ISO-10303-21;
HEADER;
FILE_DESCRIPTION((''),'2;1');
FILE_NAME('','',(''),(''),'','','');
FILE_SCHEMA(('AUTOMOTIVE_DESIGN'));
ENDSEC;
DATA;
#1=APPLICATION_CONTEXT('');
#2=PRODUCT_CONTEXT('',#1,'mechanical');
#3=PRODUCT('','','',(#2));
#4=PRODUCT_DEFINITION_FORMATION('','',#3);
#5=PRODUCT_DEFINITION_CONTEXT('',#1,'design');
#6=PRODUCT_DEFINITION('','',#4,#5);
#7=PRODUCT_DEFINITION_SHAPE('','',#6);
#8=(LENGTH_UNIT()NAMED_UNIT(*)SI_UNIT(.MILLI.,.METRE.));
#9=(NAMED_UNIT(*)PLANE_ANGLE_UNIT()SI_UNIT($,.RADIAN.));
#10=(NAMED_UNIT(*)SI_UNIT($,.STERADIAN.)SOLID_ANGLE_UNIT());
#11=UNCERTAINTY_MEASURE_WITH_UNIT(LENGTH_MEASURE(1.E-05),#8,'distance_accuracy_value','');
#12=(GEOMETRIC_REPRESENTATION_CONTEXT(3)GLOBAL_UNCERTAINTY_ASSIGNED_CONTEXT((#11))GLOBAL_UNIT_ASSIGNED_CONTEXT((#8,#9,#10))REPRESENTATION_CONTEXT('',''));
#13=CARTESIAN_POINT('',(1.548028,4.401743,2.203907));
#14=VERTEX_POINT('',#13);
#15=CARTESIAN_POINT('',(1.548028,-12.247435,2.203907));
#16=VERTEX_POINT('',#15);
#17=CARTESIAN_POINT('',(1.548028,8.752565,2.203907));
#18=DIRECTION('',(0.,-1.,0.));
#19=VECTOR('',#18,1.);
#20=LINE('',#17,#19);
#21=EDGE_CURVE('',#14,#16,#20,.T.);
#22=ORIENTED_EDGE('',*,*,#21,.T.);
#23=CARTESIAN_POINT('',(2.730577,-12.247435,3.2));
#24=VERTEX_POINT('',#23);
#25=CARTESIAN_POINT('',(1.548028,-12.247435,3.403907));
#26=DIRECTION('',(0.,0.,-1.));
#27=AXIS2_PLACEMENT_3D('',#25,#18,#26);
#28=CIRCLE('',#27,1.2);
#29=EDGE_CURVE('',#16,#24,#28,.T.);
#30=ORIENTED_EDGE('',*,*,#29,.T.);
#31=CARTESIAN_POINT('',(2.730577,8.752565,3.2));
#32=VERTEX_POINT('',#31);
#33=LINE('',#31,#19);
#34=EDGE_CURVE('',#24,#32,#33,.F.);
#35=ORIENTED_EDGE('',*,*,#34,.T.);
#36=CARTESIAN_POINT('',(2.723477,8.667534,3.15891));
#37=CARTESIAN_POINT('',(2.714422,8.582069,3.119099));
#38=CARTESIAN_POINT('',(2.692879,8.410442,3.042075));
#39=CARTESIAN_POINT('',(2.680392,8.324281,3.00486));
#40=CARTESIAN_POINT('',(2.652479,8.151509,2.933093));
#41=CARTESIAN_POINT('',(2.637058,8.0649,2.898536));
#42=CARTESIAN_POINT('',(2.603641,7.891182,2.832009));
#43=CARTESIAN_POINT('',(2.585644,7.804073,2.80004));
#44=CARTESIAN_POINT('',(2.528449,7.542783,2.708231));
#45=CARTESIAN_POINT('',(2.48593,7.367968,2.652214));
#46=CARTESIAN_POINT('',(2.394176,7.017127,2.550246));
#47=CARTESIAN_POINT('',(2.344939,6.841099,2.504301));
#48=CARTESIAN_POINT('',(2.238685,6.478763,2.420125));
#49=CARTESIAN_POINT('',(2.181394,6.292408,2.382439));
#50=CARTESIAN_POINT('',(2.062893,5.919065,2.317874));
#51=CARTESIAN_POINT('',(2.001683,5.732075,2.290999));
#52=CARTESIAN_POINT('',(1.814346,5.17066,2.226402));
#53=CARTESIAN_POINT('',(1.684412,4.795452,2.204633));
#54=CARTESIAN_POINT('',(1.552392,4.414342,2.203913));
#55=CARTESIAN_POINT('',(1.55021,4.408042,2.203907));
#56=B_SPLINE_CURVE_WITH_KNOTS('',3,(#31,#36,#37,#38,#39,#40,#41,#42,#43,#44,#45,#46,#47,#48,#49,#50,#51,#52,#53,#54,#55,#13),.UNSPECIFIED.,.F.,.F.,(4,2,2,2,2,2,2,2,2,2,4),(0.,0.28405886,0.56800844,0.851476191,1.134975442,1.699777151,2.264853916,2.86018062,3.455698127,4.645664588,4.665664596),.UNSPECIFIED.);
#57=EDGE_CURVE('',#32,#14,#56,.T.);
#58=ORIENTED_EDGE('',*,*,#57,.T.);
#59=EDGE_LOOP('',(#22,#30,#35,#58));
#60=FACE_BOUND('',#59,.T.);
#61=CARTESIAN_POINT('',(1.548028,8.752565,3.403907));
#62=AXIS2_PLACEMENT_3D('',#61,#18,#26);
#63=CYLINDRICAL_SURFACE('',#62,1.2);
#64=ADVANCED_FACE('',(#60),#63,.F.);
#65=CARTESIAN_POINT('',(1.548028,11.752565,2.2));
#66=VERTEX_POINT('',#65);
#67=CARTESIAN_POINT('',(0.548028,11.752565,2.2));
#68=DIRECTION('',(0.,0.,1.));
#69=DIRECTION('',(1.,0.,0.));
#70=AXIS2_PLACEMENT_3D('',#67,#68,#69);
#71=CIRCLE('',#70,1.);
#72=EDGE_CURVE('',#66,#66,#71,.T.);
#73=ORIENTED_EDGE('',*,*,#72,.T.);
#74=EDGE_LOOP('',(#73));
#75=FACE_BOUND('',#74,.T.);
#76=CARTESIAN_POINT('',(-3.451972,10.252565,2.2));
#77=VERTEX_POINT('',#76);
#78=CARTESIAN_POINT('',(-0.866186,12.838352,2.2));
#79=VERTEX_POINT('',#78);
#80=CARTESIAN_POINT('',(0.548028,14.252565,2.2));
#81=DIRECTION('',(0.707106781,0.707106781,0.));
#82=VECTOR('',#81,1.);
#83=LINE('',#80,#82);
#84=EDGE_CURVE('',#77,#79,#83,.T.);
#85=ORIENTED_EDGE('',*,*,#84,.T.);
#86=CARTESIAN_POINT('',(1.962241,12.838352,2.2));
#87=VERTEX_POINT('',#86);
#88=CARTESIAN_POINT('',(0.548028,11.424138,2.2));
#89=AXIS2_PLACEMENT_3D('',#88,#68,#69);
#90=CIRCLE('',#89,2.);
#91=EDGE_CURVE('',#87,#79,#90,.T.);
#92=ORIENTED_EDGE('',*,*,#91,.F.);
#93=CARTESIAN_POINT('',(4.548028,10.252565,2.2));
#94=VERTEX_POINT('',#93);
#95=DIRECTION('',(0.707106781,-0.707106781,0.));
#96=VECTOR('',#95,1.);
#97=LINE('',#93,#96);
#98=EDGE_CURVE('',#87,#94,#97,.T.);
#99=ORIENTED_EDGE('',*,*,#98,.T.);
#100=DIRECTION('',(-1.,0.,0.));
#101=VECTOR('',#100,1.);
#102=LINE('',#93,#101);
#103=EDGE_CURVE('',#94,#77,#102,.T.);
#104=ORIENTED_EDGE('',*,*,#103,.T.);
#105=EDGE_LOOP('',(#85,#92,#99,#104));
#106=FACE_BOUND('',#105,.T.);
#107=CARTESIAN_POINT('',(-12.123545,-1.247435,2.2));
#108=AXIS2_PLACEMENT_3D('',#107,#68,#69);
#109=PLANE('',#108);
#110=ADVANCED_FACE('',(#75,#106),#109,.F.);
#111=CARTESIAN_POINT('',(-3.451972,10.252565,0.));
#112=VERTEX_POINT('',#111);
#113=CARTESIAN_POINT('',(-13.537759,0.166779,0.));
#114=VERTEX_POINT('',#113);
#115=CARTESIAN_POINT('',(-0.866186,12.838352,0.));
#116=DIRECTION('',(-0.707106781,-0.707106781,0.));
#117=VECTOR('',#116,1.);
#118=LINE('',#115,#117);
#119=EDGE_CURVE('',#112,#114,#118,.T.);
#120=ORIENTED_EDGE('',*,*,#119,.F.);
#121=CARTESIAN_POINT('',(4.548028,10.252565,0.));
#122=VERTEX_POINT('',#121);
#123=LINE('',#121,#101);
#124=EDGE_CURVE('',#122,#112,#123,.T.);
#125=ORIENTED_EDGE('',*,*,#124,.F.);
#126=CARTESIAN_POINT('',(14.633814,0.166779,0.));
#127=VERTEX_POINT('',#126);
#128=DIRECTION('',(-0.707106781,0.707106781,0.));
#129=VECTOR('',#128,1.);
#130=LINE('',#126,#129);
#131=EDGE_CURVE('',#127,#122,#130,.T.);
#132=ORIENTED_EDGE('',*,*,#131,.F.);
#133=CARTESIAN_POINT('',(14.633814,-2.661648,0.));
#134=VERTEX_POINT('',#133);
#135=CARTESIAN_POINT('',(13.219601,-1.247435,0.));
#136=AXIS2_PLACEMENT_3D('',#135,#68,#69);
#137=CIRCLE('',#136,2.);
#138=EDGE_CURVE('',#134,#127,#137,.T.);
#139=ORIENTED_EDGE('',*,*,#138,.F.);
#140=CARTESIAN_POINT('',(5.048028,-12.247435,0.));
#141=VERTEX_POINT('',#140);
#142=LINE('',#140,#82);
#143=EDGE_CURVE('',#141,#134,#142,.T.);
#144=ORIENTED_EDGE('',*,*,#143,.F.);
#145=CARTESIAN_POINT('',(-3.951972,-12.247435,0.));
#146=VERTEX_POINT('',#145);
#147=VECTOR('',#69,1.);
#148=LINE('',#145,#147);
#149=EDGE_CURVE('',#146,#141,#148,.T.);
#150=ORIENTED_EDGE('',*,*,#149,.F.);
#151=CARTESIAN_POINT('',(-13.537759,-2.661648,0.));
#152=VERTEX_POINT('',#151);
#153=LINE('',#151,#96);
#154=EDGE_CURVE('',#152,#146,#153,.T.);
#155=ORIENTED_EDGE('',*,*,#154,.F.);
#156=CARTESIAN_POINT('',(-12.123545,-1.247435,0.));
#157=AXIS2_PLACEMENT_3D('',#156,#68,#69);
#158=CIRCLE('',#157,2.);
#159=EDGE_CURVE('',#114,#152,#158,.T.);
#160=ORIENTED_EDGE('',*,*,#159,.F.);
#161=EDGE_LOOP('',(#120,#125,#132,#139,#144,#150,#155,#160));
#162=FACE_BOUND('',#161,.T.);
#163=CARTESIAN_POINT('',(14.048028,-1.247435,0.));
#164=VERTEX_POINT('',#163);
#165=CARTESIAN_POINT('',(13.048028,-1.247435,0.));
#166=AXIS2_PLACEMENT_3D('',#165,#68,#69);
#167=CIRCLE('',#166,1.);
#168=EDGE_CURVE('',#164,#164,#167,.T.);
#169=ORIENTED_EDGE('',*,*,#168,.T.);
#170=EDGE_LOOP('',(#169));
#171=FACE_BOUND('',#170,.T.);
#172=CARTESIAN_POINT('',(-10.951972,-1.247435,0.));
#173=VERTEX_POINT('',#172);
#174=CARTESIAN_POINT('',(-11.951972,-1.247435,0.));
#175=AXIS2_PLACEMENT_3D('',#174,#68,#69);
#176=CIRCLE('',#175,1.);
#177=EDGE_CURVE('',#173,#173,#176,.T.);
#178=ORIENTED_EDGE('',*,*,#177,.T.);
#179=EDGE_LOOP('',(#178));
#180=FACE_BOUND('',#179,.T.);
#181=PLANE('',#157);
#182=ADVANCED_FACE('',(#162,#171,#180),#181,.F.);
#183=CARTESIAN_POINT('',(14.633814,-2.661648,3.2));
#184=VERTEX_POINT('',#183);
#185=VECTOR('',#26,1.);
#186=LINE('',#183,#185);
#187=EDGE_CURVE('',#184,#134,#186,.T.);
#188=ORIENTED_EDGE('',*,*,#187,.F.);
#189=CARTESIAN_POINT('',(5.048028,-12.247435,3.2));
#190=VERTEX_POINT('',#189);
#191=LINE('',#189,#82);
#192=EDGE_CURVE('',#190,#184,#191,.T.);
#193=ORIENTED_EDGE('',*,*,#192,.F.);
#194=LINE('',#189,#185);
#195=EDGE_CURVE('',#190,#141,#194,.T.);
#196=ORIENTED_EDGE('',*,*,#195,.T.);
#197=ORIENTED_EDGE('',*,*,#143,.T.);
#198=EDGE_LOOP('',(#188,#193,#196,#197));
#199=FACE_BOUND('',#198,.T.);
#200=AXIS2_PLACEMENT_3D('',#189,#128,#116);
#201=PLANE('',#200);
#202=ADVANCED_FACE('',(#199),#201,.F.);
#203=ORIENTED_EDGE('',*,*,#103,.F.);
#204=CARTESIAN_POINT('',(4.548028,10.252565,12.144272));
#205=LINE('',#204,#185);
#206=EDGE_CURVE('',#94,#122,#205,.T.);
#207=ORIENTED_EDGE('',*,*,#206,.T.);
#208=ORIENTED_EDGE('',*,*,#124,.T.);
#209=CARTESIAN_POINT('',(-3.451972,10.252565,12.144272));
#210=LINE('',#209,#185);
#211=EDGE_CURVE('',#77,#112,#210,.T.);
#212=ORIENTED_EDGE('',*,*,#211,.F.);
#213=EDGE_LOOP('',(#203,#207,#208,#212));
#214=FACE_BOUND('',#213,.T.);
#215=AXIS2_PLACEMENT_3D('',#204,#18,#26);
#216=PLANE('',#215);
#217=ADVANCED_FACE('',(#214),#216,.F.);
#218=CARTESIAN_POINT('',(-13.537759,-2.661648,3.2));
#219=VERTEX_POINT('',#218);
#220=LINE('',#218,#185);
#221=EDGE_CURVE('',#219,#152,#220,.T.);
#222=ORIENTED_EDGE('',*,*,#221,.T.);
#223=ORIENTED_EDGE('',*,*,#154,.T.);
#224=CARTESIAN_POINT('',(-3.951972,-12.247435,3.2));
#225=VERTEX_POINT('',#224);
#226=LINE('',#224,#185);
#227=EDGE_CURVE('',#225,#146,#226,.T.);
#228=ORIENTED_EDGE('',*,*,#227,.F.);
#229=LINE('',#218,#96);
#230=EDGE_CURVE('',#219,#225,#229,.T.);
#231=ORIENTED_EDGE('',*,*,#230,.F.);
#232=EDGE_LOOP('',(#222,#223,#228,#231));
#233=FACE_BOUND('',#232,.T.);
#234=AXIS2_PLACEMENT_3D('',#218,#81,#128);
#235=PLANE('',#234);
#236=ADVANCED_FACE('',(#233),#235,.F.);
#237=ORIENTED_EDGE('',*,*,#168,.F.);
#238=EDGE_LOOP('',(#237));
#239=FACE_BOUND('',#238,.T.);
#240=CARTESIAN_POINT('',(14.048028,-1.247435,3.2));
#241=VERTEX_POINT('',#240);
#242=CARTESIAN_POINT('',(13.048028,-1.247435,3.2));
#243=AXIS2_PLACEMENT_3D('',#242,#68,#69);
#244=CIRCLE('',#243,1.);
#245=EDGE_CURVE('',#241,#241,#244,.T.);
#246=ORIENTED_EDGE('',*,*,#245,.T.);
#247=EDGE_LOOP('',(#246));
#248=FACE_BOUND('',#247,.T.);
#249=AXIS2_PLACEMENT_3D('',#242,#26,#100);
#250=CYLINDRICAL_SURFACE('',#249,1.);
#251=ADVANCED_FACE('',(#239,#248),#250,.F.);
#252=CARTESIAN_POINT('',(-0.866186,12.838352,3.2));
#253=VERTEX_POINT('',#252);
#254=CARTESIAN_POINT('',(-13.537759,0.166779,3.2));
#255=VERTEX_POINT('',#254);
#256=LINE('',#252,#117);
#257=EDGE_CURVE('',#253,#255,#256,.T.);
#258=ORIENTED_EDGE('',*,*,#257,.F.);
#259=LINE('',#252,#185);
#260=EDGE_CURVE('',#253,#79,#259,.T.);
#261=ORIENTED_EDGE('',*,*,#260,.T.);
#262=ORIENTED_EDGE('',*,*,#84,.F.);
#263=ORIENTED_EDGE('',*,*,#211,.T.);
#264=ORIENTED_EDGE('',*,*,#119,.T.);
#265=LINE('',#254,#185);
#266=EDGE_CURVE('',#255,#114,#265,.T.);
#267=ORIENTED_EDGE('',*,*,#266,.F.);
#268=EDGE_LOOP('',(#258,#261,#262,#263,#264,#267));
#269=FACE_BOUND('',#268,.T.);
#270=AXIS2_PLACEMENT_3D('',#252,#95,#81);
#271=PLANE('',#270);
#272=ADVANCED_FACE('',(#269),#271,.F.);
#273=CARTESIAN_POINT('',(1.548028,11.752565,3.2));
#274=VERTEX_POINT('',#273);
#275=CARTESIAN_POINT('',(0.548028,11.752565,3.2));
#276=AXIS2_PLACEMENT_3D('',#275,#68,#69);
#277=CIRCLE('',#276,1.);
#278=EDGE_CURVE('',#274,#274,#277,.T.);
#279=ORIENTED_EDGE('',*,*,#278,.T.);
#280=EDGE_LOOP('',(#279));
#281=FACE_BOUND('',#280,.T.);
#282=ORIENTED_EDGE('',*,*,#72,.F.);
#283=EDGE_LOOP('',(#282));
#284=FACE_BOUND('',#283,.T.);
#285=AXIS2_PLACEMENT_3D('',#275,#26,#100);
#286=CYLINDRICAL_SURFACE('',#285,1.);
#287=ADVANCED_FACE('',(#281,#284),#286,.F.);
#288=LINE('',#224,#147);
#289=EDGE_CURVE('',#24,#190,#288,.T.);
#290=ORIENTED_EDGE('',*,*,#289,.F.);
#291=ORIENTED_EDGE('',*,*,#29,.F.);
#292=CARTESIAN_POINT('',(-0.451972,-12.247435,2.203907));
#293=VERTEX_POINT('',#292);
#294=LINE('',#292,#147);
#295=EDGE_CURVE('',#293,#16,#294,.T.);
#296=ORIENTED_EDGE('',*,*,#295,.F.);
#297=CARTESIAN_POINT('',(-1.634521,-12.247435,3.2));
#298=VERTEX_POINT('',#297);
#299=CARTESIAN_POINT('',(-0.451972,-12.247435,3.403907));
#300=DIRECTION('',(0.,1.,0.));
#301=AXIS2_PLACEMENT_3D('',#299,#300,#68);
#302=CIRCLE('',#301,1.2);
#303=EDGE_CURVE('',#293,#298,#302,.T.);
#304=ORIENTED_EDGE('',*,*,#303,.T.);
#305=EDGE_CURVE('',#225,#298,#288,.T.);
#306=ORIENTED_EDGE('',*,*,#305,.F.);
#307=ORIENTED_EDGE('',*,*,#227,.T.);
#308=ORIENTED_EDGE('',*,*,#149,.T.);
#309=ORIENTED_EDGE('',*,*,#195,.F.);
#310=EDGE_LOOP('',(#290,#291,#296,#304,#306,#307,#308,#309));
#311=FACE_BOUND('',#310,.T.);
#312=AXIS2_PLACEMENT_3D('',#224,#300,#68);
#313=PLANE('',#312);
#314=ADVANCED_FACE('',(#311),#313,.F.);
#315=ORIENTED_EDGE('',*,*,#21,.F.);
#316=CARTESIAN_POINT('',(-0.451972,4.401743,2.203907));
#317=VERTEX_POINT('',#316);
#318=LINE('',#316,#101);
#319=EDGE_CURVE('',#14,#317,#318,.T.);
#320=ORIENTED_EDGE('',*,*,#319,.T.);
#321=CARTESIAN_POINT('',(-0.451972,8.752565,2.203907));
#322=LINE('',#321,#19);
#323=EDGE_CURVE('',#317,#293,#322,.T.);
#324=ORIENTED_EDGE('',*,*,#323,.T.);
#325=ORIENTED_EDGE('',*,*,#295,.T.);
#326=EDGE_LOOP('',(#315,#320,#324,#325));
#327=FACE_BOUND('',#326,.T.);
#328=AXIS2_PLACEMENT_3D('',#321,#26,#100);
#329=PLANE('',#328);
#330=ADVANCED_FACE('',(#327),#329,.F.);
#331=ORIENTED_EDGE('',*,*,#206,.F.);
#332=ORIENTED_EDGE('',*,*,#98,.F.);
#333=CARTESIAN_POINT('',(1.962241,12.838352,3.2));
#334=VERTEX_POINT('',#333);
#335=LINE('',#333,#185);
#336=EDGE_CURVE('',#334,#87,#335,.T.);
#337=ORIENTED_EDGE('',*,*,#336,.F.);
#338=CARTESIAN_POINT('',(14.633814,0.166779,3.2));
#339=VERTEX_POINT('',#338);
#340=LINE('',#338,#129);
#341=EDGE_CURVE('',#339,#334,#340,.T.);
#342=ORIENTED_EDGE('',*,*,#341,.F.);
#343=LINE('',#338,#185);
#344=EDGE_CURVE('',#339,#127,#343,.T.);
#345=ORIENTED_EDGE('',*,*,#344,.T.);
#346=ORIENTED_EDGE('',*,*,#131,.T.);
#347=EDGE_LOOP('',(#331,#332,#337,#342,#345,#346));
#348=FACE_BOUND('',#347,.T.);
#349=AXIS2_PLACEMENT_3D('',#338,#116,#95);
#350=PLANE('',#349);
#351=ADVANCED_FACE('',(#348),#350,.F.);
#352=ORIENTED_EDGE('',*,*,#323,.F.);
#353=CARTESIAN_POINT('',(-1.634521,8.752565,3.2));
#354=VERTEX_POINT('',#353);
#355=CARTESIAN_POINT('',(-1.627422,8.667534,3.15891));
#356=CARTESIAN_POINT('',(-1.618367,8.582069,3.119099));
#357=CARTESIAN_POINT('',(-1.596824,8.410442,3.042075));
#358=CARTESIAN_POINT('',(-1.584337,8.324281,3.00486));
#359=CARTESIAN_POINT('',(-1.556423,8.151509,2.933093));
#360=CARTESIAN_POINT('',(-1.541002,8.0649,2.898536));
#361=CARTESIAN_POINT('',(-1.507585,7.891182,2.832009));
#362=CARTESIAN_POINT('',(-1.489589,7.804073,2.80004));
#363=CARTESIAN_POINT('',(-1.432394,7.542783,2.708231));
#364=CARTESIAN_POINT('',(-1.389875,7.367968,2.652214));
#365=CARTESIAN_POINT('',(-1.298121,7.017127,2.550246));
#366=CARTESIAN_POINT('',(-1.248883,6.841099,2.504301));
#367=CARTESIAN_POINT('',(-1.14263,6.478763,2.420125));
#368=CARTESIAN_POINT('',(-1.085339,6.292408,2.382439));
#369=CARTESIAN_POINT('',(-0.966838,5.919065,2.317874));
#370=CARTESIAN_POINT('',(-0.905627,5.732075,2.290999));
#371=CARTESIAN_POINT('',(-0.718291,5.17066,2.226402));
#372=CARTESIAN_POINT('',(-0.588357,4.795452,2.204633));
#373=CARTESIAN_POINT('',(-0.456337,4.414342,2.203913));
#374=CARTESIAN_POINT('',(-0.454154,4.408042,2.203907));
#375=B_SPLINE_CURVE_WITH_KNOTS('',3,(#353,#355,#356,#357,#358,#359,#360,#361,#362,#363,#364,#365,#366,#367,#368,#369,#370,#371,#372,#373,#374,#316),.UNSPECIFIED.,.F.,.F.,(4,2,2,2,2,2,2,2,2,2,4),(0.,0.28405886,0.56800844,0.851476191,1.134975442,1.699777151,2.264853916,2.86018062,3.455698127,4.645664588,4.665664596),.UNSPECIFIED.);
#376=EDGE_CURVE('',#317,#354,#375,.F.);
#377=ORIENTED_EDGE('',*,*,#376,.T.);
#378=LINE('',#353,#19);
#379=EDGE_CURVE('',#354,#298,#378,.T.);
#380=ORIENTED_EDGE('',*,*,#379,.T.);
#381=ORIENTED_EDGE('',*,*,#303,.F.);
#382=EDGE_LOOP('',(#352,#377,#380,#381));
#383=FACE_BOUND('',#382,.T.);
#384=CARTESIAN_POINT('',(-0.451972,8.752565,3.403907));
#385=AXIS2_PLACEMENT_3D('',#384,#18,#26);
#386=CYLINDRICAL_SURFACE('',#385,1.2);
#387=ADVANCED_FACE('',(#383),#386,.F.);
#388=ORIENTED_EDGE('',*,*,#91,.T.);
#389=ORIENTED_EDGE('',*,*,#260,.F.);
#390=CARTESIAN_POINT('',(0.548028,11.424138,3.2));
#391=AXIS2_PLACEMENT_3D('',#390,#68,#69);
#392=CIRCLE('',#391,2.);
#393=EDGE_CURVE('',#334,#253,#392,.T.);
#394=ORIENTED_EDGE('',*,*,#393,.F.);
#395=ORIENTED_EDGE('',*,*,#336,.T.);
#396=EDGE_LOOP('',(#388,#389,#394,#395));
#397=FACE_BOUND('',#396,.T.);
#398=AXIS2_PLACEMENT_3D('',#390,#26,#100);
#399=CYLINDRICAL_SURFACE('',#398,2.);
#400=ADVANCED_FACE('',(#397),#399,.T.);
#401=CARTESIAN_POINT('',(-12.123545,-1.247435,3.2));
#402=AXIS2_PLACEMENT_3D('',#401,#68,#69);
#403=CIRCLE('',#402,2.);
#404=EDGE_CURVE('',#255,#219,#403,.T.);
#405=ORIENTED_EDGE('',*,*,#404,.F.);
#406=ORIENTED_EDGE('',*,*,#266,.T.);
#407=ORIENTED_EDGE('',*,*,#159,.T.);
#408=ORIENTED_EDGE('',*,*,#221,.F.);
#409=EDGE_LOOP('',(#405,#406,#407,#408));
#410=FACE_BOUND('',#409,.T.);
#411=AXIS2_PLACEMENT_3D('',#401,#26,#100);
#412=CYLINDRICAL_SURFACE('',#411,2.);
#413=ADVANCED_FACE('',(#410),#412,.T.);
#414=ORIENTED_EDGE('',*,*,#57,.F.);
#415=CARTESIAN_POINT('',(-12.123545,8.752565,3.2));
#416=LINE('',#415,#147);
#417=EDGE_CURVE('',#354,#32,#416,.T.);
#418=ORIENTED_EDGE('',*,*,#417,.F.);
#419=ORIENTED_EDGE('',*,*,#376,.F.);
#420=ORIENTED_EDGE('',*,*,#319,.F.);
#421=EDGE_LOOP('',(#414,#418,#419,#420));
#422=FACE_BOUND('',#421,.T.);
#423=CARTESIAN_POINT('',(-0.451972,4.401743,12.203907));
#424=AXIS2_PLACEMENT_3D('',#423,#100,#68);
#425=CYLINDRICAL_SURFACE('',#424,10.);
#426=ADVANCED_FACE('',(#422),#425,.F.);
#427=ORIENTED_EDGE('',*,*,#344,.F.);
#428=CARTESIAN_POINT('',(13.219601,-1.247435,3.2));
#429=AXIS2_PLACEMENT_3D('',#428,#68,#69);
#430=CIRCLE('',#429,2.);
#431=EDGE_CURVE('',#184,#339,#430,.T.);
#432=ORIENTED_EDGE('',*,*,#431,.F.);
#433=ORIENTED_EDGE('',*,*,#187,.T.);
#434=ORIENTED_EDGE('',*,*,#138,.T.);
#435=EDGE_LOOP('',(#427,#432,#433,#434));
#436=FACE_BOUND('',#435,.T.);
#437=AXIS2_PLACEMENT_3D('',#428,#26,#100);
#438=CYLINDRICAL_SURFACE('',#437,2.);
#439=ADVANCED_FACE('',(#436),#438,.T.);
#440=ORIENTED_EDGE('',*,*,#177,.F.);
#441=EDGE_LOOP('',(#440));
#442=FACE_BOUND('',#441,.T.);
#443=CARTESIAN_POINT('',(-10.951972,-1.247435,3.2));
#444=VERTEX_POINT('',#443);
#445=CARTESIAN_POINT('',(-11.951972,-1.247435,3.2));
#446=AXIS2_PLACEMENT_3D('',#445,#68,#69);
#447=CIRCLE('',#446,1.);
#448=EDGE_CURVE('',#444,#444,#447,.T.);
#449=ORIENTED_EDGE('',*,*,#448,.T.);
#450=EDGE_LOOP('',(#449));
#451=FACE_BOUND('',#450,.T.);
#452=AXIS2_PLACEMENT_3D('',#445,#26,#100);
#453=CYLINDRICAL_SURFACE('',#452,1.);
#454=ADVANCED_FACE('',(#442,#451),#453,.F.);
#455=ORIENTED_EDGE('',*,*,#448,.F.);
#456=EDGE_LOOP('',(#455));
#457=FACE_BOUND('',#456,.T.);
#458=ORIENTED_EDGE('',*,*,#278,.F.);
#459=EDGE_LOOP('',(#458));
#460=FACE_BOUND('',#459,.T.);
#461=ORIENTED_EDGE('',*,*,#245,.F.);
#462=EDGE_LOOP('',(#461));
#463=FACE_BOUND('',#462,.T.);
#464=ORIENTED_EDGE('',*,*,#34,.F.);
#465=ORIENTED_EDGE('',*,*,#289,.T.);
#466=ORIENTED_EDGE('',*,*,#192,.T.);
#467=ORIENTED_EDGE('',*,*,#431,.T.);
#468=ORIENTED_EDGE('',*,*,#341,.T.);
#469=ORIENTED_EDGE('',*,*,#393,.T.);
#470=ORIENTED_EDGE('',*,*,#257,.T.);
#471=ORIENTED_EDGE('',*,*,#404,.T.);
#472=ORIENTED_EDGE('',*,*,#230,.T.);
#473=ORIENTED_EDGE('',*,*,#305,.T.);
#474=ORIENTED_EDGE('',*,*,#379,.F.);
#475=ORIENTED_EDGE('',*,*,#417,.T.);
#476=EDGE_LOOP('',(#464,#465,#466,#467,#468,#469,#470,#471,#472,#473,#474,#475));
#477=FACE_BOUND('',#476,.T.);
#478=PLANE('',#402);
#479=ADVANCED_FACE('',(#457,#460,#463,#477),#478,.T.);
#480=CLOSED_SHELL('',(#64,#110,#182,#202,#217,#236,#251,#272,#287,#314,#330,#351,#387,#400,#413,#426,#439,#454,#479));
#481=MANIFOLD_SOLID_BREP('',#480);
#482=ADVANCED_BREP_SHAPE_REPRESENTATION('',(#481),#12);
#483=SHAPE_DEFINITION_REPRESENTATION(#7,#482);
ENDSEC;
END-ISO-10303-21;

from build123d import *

# Parameters (mm, degrees)
SKETCH1_R           = 1
BOSS_EXTRUDE1_DEPTH = 3.2
CUT_EXTRUDE1_DEPTH  = 21
FILLET1_R           = 10
CUT_EXTRUDE3_DEPTH  = 2.2


with BuildPart() as part:
    # Sketch1 → Boss-Extrude1 (new body)
    with BuildSketch(Plane.XY):
        with BuildLine():
            Line((-13.537758799, -2.661648107), (-3.951972362, -12.247434544))
            Line((-3.951972362, -12.247434544), (5.048027638, -12.247434544))
            Line((5.048027638, -12.247434544), (14.633814076, -2.661648107))
            ThreePointArc((14.633814076, -2.661648107), (15.219600513, -1.247434544), (14.633814076, 0.166779018))
            Line((14.633814076, 0.166779018), (1.962241201, 12.838351893))
            ThreePointArc((1.962241201, 12.838351893), (0.548027638, 13.424138331), (-0.866185924, 12.838351893))
            Line((-0.866185924, 12.838351893), (-13.537758799, 0.166779018))
            ThreePointArc((-13.537758799, 0.166779018), (-14.123545237, -1.247434544), (-13.537758799, -2.661648107))
        make_face()
        with Locations((-11.951972362, -1.247434544)):
            Circle(SKETCH1_R, mode=Mode.SUBTRACT)
        with Locations((13.048027638, -1.247434544)):
            Circle(SKETCH1_R, mode=Mode.SUBTRACT)
        with Locations((0.548027638, 11.752565456)):
            Circle(SKETCH1_R, mode=Mode.SUBTRACT)
    extrude(amount=BOSS_EXTRUDE1_DEPTH)

    # Sketch2 → Cut-Extrude1 (cut)
    with BuildSketch(Plane.XZ.offset(12.247434544)):
        with BuildLine():
            Line((-0.451972362, 4.603907064), (1.548027638, 4.603907064))
            ThreePointArc((1.548027638, 4.603907064), (2.748027638, 3.403907064), (1.548027638, 2.203907064))
            Line((1.548027638, 2.203907064), (-0.451972362, 2.203907064))
            ThreePointArc((-0.451972362, 2.203907064), (-1.651972362, 3.403907064), (-0.451972362, 4.603907064))
        make_face()
    extrude(amount=-CUT_EXTRUDE1_DEPTH, mode=Mode.SUBTRACT)

    # Fillet1
    # the kernel refuses this fillet: 10 mm, written as the material it adds along each edge
    with BuildSketch(Plane(origin=(12.425084222, 8.752565456, 2.203907064), x_dir=(0, -1, 0), z_dir=(-1, 0, 0))) as fillet1_piece_1_section:
        with BuildLine():
            CenterArc((4.350822634, 10), FILLET1_R, 244.209471462, 25.790528538)
            Line((0, 0.996092936), (0, 0))
            Line((0, 0), (4.350822634, 0))
        make_face()
    fillet1_piece_1 = extrude(amount=23.754113168, mode=Mode.PRIVATE)
    fillet1_piece_1 = split(fillet1_piece_1, bisect_by=Plane(origin=(-2.713667021, 10.990870796, 2.436615037), z_dir=(0.7071067811865476, -0.7071067811865475, 0)), keep=Keep.TOP, mode=Mode.PRIVATE)
    fillet1_piece_1 = split(fillet1_piece_1, bisect_by=Plane(origin=(4.900996749, 9.899596345, 2.436615037), z_dir=(-0.7071067811865476, -0.7071067811865476, 0)), keep=Keep.TOP, mode=Mode.PRIVATE)
    add(fillet1_piece_1)

    # Sketch5 → Cut-Extrude3 (cut)
    with BuildSketch(Plane(origin=(0, 0, 0), x_dir=(-1, 0, 0), z_dir=(0, 0, -1))):
        Polygon((-4.548027638, 10.252565456), (-0.548027638, 14.252565456), (3.451972362, 10.252565456), align=None)
    extrude(amount=-CUT_EXTRUDE3_DEPTH, mode=Mode.SUBTRACT)


solid = part.part
